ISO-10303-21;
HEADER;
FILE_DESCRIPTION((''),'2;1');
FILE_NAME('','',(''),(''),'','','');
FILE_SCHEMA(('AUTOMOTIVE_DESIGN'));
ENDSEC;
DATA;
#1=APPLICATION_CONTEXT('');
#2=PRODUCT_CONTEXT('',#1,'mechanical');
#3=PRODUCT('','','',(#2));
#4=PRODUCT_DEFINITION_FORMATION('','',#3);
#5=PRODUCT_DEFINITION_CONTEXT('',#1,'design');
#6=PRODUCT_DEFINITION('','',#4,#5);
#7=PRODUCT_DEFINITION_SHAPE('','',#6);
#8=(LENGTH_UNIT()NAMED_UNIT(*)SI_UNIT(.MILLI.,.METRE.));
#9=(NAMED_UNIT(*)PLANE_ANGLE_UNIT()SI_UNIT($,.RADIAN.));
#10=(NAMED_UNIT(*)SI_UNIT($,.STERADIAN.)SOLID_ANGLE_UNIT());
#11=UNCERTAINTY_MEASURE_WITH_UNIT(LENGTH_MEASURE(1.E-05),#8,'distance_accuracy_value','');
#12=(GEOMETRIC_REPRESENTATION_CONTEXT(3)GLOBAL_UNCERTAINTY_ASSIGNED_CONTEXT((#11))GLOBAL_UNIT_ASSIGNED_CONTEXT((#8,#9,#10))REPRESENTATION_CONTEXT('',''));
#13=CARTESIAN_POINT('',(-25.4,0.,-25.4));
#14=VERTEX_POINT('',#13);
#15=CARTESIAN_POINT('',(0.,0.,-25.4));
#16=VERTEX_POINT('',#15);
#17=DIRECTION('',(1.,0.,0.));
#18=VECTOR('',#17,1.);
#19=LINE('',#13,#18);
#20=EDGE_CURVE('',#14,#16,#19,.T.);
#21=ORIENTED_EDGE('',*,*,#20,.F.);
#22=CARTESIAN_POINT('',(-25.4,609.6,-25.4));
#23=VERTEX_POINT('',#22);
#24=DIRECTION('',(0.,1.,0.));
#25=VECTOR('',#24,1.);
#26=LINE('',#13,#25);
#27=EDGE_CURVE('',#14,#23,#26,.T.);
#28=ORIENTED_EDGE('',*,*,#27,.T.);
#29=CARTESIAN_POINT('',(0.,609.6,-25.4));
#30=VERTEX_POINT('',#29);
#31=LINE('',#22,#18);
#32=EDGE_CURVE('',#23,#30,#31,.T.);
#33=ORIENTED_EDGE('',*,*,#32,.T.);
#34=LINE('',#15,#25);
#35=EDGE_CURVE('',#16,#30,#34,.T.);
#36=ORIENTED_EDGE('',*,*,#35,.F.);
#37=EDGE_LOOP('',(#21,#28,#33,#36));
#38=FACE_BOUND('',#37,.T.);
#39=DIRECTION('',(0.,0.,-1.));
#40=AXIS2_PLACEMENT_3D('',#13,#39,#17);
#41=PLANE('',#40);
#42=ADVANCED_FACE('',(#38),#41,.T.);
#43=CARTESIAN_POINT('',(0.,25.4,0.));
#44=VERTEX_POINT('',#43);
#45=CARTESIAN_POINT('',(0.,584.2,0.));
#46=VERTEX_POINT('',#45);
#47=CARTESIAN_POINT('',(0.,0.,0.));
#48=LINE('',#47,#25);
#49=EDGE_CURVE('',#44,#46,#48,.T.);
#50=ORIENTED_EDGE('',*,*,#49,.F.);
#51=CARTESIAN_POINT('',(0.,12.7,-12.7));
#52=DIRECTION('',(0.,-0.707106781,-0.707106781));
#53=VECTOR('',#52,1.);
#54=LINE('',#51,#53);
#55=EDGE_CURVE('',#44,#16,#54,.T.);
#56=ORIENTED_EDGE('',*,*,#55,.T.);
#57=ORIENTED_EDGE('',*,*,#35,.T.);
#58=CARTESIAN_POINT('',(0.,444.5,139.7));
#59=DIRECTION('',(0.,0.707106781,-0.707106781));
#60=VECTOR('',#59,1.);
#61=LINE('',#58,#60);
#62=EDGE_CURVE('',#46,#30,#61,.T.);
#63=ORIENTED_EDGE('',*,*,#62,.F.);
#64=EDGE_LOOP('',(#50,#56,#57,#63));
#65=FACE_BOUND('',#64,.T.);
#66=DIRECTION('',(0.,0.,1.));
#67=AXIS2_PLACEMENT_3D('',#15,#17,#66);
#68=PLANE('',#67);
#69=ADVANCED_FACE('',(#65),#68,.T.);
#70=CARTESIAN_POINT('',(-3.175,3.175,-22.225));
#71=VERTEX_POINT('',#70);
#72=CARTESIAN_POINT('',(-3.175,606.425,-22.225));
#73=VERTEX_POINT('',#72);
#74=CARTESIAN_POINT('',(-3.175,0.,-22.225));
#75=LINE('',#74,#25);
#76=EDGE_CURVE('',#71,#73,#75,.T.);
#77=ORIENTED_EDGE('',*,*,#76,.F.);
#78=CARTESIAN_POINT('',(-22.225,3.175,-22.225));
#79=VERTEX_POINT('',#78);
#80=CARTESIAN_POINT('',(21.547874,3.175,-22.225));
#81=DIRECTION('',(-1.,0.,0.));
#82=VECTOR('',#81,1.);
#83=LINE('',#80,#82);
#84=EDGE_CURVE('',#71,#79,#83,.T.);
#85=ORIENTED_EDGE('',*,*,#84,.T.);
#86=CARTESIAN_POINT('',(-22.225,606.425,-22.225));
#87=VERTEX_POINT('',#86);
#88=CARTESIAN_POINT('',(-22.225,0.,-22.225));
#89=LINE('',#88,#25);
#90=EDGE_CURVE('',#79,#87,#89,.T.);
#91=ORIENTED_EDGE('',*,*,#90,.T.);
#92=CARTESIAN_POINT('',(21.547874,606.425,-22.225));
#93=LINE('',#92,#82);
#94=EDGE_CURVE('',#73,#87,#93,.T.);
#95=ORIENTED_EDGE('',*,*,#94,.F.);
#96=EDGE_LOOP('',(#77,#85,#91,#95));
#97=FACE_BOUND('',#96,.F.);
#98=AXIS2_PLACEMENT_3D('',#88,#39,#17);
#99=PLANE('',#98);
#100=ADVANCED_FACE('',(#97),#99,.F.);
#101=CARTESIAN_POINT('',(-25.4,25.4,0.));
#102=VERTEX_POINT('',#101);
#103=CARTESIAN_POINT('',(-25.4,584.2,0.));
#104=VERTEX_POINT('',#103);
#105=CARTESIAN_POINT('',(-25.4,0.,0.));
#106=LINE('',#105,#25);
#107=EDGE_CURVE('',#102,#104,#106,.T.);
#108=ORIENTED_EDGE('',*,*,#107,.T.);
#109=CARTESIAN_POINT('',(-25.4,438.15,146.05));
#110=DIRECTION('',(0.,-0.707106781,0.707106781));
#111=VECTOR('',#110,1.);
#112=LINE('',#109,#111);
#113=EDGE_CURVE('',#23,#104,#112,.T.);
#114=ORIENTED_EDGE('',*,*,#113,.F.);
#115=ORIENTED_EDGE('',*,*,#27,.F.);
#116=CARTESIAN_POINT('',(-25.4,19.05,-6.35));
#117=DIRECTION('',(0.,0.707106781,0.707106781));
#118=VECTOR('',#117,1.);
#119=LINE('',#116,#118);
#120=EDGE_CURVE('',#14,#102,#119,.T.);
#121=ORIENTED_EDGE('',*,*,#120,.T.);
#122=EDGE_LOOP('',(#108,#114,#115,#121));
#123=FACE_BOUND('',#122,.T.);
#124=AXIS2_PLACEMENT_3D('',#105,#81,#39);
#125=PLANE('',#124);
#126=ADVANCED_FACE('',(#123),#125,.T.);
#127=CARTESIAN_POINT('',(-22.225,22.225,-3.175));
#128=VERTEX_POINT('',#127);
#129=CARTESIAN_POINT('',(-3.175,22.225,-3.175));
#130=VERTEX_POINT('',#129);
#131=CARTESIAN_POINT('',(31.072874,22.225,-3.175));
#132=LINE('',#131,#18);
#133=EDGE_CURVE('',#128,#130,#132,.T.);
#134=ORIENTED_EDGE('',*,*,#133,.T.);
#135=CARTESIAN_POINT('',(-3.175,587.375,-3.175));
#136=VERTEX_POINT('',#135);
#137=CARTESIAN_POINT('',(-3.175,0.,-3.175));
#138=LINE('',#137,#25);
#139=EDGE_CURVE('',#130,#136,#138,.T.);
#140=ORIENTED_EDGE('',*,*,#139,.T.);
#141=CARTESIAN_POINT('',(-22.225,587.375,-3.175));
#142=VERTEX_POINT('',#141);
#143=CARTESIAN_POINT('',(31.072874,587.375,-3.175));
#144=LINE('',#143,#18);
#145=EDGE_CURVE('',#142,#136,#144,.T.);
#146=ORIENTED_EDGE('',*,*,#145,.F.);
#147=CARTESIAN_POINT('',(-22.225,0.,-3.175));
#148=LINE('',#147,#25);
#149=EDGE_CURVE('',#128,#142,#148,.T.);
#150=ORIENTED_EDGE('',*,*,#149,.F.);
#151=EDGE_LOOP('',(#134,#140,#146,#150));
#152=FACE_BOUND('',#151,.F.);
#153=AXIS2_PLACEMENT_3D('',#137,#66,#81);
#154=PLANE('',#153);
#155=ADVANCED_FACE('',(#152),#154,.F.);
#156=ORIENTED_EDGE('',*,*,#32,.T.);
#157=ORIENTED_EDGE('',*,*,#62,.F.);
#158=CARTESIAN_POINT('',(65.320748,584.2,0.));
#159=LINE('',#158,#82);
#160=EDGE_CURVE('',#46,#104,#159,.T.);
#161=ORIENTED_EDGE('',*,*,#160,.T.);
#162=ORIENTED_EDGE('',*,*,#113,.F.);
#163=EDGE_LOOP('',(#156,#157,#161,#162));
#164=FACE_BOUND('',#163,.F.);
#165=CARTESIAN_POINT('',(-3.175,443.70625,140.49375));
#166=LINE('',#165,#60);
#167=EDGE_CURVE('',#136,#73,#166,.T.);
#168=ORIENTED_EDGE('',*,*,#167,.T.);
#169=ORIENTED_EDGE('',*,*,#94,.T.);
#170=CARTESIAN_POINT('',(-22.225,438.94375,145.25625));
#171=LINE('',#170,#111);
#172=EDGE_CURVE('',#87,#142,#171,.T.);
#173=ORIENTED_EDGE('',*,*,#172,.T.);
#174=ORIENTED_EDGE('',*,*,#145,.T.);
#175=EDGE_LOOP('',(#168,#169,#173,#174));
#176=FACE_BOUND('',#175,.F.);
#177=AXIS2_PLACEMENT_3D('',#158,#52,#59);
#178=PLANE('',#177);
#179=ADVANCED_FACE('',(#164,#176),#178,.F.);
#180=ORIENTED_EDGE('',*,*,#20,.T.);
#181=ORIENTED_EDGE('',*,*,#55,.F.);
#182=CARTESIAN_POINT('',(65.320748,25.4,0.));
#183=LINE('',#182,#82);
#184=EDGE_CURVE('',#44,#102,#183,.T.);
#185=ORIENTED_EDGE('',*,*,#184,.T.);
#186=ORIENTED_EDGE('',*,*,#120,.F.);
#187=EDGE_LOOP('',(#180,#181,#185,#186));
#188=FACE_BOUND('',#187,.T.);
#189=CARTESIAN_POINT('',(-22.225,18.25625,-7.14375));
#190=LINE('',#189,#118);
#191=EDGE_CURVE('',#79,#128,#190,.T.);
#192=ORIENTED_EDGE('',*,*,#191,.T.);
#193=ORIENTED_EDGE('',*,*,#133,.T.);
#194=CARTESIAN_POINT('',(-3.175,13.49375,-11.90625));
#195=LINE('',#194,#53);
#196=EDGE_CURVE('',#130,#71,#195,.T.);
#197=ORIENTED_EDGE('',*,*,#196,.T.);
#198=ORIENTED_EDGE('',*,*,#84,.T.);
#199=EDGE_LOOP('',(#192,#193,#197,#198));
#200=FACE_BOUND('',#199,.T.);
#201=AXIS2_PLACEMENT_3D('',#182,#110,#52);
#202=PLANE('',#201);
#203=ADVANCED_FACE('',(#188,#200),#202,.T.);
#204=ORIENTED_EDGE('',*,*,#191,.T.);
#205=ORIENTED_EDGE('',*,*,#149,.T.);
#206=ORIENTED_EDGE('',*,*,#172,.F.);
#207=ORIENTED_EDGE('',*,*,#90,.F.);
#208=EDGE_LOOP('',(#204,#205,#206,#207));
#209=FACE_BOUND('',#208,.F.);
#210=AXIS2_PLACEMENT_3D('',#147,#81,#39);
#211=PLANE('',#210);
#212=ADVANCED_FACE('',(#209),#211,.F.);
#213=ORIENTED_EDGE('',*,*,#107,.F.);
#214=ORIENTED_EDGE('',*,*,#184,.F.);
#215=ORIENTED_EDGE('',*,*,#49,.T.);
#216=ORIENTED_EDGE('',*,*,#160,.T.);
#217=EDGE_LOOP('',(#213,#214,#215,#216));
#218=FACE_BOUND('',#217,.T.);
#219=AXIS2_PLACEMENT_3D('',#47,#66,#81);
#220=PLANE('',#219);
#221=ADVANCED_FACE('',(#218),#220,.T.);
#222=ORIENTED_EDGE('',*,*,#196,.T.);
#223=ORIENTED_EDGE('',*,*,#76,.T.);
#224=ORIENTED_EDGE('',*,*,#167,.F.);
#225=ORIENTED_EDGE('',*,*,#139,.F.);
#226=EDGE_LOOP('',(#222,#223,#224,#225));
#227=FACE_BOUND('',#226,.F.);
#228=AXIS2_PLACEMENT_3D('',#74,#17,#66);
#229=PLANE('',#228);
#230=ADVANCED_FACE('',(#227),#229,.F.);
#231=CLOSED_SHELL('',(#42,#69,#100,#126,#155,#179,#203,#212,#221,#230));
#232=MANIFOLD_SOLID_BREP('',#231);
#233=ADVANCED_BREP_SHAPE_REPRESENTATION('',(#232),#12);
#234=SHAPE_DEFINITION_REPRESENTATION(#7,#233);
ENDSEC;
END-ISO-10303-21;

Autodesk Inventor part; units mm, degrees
ref_plane "YZ Plane" through (0, 0, 0) normal (1, 0, 0) x (0, 1, 0)
ref_plane "XZ Plane" through (0, 0, 0) normal (0, 1, 0) x (-1, 0, 0)
ref_plane "XY Plane" through (0, 0, 0) normal (0, 0, 1) x (1, 0, 0)
sketch "Sketch1" plane through (0, 0, 0) normal (0, 1, 0) x (-1, 0, 0)
  line L0 (0, 0) -> (25.4, 0)
  line L1 (25.4, 0) -> (25.4, -25.4)
  line L2 (25.4, -25.4) -> (0, -25.4)
  line L3 (0, -25.4) -> (0, 0)
  line L4 (3.175, -3.175) -> (22.225, -3.175)
  line L5 (22.225, -3.175) -> (22.225, -22.225)
  line L6 (22.225, -22.225) -> (3.175, -22.225)
  line L7 (3.175, -22.225) -> (3.175, -3.175)
  dimension "d0" = 25.4
  dimension "d1" = 25.4
  dimension "d2" = 3.175
extrude "Extrusion1" add sketch "Sketch1" along normal blind 609.6
chamfer "Chamfer1" distance 25.4 angle 45 2 edges at (-12.7, 609.6, 0) (-12.7, 0, 0)
properties part number "1x1x24"
